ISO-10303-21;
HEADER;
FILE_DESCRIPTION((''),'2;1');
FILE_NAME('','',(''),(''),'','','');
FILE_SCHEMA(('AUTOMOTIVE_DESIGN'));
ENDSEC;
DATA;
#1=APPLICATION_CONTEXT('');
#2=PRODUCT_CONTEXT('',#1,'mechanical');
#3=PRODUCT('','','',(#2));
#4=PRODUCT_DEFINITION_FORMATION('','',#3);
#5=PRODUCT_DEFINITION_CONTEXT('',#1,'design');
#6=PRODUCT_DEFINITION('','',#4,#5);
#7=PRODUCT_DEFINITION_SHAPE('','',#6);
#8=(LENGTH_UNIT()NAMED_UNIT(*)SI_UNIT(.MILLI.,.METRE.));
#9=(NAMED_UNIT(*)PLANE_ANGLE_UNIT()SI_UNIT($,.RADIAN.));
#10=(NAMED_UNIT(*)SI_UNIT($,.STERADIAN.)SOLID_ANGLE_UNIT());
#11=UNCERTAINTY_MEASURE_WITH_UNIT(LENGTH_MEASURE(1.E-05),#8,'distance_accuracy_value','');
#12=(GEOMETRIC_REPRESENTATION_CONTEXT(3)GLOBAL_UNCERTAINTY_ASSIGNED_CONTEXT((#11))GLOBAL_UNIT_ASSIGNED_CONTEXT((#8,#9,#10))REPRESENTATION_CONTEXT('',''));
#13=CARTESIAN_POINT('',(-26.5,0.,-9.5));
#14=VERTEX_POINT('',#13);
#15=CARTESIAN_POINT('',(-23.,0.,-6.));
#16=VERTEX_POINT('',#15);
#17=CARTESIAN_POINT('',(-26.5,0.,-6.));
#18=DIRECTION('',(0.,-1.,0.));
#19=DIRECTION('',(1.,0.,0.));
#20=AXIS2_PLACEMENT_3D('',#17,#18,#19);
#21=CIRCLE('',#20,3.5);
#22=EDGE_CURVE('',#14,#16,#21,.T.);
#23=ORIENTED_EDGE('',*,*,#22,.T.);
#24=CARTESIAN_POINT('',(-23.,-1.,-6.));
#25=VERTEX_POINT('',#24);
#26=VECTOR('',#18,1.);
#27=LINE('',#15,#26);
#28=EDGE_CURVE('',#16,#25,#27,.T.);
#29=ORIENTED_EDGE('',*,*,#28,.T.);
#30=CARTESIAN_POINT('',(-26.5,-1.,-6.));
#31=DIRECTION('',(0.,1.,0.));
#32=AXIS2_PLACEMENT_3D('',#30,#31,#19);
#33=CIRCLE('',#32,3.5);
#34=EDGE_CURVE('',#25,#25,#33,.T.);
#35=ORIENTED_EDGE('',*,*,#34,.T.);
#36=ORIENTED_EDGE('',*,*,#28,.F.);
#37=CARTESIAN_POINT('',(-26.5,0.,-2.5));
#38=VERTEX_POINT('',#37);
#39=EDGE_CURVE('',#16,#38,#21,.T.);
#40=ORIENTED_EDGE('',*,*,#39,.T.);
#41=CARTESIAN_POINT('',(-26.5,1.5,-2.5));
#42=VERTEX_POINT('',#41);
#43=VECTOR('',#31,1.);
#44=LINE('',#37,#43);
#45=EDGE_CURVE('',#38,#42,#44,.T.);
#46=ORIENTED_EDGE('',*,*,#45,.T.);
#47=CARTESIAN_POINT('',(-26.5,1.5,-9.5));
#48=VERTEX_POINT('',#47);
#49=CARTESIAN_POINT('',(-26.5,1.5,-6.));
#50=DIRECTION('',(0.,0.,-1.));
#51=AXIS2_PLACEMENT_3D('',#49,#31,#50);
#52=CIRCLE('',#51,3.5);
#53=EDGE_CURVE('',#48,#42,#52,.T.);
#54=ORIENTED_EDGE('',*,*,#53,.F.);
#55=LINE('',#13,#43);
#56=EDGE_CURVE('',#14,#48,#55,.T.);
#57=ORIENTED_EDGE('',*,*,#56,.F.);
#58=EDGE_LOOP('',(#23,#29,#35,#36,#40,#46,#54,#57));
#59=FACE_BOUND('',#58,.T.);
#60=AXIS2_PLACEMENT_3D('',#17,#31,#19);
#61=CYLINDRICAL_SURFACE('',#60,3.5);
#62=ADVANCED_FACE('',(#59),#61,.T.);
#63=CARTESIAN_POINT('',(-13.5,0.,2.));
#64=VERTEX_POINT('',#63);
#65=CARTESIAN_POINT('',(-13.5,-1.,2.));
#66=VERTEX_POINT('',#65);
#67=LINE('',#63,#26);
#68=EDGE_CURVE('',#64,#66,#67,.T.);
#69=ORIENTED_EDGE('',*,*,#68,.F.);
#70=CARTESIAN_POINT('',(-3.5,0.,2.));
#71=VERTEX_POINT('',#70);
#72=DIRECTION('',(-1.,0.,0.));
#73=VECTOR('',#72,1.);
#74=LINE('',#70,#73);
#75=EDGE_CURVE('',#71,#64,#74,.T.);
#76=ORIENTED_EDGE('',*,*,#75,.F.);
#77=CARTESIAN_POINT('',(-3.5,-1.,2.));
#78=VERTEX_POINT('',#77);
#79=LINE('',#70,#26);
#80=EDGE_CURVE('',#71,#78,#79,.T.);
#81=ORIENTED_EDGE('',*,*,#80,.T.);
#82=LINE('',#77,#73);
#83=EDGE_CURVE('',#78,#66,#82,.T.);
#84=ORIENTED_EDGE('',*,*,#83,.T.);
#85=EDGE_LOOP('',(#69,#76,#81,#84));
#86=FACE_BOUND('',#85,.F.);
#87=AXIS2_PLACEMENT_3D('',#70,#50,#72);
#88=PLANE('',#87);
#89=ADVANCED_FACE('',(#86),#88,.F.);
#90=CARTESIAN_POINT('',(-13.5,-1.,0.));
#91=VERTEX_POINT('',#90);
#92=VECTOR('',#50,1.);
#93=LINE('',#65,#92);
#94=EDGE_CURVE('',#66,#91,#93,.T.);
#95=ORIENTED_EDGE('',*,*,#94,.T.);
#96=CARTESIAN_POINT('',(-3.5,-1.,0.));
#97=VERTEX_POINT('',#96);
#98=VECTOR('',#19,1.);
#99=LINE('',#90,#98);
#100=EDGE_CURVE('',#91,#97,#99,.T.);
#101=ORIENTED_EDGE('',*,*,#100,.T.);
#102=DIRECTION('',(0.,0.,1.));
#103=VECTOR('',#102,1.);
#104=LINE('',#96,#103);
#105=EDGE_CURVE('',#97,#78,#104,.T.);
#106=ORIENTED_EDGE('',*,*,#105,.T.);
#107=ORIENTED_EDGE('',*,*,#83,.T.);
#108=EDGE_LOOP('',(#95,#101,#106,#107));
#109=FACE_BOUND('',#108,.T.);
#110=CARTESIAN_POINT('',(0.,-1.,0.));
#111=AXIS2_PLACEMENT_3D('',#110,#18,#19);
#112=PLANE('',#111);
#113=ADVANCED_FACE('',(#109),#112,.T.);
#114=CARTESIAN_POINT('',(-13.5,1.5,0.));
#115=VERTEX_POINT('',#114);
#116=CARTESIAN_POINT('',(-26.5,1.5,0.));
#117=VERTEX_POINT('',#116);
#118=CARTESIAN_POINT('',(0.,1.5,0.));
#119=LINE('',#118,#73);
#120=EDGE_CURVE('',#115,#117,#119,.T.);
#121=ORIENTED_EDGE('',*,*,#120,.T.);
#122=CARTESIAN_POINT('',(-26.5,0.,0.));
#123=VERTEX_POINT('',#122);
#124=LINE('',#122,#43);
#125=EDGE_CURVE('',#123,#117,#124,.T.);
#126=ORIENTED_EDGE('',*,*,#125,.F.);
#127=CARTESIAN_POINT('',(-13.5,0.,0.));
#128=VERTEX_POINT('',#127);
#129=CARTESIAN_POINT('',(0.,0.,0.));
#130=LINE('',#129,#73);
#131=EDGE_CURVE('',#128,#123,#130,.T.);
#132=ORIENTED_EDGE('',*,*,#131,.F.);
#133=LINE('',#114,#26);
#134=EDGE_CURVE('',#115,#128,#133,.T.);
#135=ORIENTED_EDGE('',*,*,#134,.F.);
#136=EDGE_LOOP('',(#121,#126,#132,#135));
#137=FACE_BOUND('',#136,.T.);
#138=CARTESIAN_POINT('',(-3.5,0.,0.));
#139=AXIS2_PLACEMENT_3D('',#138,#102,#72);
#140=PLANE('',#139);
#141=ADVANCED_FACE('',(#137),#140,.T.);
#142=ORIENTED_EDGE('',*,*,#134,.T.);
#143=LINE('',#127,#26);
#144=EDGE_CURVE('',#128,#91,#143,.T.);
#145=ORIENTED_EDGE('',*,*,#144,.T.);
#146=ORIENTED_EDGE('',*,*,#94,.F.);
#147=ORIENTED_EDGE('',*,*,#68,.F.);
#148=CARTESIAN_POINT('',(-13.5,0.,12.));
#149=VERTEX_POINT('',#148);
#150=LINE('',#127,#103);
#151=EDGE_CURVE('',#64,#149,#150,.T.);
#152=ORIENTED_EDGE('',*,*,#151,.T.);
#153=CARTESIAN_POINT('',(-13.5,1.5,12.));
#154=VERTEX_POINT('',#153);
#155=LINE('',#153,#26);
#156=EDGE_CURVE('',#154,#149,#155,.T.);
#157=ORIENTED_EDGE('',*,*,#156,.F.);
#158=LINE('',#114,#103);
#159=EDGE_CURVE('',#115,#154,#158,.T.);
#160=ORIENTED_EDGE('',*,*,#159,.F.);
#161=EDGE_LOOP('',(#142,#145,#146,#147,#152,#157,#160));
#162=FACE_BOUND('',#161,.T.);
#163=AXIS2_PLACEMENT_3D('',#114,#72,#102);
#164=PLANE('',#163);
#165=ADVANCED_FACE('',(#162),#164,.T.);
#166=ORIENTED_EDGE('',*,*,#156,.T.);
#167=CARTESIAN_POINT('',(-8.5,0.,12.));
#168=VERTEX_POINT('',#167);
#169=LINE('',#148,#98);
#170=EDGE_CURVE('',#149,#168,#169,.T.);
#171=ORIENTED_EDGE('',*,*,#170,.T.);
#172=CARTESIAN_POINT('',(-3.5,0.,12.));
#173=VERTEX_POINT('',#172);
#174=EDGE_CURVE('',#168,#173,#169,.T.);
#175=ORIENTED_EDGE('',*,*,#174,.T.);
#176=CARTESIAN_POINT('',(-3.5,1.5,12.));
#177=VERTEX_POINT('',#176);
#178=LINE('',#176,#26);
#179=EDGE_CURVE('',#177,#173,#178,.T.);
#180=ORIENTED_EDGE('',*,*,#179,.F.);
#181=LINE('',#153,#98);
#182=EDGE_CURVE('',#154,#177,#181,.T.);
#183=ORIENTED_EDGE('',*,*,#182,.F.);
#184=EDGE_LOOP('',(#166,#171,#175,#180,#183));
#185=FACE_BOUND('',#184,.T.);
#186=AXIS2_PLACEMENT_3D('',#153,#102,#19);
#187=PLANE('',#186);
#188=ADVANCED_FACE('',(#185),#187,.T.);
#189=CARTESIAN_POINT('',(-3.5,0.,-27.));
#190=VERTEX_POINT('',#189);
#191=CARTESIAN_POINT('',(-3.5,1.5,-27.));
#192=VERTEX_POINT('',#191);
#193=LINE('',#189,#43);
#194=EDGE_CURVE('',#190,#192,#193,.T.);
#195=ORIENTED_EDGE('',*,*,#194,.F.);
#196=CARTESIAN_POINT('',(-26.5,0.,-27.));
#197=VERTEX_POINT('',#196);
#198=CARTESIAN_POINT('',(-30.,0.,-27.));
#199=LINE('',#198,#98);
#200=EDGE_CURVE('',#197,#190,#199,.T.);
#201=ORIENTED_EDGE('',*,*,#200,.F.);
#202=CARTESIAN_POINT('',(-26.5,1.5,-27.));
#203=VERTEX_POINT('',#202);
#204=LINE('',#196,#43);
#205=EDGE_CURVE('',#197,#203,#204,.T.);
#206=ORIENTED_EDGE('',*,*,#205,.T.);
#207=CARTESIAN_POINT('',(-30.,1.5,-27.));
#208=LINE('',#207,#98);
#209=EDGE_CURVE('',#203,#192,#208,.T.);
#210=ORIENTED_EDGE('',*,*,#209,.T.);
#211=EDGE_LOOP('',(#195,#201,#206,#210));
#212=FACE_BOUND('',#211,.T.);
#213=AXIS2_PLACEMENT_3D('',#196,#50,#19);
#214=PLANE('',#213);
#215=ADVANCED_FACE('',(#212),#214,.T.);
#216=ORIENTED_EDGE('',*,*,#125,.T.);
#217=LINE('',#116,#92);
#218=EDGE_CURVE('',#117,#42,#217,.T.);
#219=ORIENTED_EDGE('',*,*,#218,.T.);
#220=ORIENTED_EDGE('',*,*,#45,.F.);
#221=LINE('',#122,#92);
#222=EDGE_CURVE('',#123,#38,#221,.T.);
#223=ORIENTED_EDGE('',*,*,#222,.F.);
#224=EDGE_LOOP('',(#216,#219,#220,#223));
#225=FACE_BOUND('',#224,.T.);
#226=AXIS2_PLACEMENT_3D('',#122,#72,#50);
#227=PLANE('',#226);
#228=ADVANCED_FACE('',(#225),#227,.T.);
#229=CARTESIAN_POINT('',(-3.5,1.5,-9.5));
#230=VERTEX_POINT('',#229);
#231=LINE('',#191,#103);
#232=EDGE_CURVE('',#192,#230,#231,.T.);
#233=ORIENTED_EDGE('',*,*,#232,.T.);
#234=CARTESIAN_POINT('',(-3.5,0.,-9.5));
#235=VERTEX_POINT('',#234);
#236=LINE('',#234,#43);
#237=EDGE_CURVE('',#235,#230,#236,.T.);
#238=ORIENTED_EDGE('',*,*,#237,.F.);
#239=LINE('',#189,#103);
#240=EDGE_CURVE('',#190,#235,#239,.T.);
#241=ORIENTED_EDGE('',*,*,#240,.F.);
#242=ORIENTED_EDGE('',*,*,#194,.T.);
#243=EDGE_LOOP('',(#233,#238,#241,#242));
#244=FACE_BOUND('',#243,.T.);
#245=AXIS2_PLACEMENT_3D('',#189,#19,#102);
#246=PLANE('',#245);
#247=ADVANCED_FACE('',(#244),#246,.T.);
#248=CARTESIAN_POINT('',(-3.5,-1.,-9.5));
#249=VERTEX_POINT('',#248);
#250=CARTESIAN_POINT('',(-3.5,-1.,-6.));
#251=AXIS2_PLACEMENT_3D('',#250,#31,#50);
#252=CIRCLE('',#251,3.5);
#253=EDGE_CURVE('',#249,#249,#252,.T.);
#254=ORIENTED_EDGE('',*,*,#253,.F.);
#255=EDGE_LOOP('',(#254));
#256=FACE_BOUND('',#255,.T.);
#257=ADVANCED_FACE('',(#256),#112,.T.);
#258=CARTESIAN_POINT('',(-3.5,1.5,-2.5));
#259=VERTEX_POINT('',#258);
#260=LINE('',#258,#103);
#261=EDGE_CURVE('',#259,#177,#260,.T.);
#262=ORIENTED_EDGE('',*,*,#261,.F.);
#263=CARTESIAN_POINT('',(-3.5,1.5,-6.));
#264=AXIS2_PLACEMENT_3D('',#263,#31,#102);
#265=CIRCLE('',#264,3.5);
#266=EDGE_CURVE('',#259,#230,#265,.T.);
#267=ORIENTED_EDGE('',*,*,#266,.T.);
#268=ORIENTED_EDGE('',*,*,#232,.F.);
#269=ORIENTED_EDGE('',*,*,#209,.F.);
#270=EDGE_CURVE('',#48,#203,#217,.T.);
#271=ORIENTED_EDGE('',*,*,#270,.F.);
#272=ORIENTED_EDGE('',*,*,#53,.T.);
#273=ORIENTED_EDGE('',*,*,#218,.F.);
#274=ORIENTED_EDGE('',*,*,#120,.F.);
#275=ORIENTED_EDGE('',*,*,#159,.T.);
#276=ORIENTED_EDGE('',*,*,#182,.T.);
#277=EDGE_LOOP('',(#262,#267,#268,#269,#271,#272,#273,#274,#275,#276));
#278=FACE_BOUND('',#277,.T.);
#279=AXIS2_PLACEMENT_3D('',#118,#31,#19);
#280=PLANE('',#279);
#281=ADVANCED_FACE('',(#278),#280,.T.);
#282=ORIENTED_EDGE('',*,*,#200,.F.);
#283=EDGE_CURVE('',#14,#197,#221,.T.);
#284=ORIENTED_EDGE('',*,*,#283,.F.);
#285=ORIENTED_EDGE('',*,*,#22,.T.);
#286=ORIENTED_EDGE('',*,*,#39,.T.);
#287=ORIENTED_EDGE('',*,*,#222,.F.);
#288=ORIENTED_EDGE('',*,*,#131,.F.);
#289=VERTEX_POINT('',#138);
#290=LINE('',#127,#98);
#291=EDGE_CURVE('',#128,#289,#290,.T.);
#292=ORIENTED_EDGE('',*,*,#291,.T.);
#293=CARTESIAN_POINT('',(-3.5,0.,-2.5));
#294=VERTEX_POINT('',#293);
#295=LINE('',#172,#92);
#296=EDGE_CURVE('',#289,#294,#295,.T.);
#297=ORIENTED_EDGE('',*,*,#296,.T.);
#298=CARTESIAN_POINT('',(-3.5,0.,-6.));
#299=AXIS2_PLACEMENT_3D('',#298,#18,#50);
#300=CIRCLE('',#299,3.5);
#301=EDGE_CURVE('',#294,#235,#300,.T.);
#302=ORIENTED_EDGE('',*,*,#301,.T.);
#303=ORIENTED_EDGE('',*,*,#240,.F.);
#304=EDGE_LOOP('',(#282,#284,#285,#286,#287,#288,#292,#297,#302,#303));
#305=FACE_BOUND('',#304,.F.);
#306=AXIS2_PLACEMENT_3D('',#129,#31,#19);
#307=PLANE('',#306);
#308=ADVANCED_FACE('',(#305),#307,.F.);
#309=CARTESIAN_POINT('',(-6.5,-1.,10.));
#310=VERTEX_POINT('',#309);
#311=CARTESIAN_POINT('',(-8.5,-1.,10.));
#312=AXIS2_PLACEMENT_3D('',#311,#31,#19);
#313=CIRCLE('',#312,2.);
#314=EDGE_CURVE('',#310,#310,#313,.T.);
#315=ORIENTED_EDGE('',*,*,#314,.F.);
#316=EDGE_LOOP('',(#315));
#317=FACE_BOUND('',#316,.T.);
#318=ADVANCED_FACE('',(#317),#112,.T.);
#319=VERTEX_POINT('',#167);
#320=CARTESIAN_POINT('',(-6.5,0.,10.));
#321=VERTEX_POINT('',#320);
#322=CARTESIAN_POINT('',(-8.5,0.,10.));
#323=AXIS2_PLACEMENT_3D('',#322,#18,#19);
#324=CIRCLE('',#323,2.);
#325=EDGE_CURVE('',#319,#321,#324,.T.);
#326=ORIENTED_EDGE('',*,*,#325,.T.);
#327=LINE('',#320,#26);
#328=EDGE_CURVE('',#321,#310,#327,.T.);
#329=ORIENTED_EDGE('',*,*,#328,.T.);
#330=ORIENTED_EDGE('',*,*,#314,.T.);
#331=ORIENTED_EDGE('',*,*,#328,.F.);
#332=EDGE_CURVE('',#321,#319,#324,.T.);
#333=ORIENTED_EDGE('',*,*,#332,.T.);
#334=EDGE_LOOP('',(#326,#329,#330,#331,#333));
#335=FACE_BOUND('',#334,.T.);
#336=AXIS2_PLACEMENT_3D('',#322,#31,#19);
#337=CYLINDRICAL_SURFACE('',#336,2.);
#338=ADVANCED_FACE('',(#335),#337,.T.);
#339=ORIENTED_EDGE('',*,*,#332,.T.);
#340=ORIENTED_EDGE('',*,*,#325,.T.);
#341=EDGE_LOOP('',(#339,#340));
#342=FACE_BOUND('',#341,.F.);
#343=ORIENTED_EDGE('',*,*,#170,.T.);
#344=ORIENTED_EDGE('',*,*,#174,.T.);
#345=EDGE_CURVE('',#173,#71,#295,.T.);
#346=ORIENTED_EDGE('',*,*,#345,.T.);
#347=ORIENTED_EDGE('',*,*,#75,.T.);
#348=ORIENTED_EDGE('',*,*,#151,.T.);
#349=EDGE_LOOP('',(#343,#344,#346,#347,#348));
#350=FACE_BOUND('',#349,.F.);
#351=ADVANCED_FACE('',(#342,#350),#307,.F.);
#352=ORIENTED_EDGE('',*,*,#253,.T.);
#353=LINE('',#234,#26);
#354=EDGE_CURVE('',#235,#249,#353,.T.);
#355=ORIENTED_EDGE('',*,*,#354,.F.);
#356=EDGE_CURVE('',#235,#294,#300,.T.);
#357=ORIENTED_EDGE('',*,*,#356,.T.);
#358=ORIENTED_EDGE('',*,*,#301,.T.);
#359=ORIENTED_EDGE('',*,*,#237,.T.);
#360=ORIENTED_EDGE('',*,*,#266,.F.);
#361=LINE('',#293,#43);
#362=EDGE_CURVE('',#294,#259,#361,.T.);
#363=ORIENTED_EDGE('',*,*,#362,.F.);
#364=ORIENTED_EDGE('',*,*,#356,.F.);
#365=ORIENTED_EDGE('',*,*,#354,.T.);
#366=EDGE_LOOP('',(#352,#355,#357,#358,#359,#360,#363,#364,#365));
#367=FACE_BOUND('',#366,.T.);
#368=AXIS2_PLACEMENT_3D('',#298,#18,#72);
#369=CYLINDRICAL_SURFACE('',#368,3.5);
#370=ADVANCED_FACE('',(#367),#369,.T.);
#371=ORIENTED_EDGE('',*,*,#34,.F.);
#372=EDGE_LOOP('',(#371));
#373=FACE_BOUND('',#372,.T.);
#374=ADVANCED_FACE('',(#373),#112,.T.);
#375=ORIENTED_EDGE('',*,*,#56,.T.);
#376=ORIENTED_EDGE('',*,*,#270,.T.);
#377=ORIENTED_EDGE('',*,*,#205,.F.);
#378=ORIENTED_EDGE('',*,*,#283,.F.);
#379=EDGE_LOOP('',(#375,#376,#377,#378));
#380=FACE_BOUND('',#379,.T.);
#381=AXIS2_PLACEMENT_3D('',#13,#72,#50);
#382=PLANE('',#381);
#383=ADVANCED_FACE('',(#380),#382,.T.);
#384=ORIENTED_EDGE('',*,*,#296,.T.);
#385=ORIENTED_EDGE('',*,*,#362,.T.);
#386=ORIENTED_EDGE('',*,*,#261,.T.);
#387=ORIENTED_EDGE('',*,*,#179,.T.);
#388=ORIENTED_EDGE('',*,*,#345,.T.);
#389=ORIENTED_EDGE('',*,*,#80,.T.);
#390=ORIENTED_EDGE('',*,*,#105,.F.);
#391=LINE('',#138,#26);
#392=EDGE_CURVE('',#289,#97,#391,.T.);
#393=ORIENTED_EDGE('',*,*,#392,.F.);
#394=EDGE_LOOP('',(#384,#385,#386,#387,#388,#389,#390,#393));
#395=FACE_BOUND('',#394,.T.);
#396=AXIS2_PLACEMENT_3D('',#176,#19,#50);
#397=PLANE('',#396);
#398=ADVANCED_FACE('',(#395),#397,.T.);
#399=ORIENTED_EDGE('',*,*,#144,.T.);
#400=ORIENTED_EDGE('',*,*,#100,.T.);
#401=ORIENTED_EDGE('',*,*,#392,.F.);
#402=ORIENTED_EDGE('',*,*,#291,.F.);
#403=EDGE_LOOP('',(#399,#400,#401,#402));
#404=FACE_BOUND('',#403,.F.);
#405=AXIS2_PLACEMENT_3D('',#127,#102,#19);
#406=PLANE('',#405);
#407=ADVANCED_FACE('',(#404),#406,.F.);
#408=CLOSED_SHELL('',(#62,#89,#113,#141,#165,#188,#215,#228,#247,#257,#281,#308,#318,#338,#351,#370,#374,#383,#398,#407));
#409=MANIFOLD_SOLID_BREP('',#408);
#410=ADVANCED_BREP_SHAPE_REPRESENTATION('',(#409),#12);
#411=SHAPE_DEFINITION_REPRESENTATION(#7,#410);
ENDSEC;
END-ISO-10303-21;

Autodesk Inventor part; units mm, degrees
ref_plane "YZ Plane" through (0, 0, 0) normal (1, 0, 0) x (0, 1, 0)
ref_plane "XZ Plane" through (0, 0, 0) normal (0, 1, 0) x (-1, 0, 0)
ref_plane "XY Plane" through (0, 0, 0) normal (0, 0, 1) x (1, 0, 0)
sketch "スケッチ1" plane through (0, 0, 0) normal (0, 1, 0) x (-1, 0, 0)
  line L0 (0, 0) -> (30, 0)
  line L1 (30, 0) -> (30, -27)
  line L2 (30, -27) -> (0, -27)
  line L3 (0, -27) -> (0, 0)
  circle A0 centre (26.5, -6) radius 3.5
  circle A1 centre (3.5, -6) radius 3.5
  line L4 (26.5, 0) -> (26.5, -27)
  line L5 (3.5, -27) -> (3.5, 0)
  point P0 (26.5, -9.5)
  point P1 (26.5, -2.5)
  point P2 (3.5, -2.5)
  point P3 (3.5, -9.5)
  dimension "d0" = 30
  dimension "d1" = 27
  dimension "d2" = 7
  dimension "d3" = 7
  dimension "d4" = 6
extrude "押し出し1" add sketch "スケッチ1" along normal blind 1.5 contours L0 L4 A0 L2 L5 A1 | A1 L5 | A1 L5 | L4 A0 | A0 L4
sketch "スケッチ2" plane through (0, 1.5, 0) normal (0, 1, 0) x (1, 0, 0)
  line L0 (-3.5, 0) -> (-13.5, 0)
  line L1 (-13.5, 0) -> (-13.5, -12)
  line L2 (-13.5, -12) -> (-3.5, -12)
  line L3 (-3.5, -12) -> (-3.5, 0)
  line L4 (-3.5, 0) -> (-3.5, 2.5) projected
  point P0 (0, 0)
  dimension "d7" = 10
  dimension "d8" = 12
extrude "押し出し2" add sketch "スケッチ2" against normal up to surface (1.5 mm away)
sketch "スケッチ3" plane through (0, 0, 0) normal (0, -1, 0) x (1, 0, 0)
  arc A0 (-26.5, -2.5) -> (-26.5, -9.5) centre (-26.5, -6) ccw projected
  arc A1 (-3.5, -9.5) -> (-3.5, -2.5) centre (-3.5, -6) ccw projected
  line L0 (-26.5, 0) -> (-13.5, 0) projected
  line L1 (-13.5, 0) -> (-3.5, 0)
  line L2 (-3.5, 0) -> (-3.5, 2)
  line L3 (-3.5, 2) -> (-13.5, 2)
  line L4 (-13.5, 2) -> (-13.5, 0)
  line L5 (-3.5, -2.5) -> (-3.5, 12) projected
  circle A2 centre (-26.5, -6) radius 3.5
  circle A3 centre (-3.5, -6) radius 3.5
  point P0 (0, 0)
  point P1 (-3.5, -2.5)
  point P2 (-26.5, -9.5)
  dimension "d11" = 2
extrude "押し出し3" add sketch "スケッチ3" along normal blind 1
sketch "スケッチ4" plane through (0, 0, 0) normal (0, -1, 0) x (1, 0, 0)
  circle A0 centre (-8.5, 10) radius 2
  line L0 (-3.5, 12) -> (-13.5, 12) projected
  point P0 (0, 0)
  point P1 (-8.5, 12)
  dimension "d14" = 4
extrude "押し出し4" add sketch "スケッチ4" along normal blind 1
properties part number "type_A_ver2"
